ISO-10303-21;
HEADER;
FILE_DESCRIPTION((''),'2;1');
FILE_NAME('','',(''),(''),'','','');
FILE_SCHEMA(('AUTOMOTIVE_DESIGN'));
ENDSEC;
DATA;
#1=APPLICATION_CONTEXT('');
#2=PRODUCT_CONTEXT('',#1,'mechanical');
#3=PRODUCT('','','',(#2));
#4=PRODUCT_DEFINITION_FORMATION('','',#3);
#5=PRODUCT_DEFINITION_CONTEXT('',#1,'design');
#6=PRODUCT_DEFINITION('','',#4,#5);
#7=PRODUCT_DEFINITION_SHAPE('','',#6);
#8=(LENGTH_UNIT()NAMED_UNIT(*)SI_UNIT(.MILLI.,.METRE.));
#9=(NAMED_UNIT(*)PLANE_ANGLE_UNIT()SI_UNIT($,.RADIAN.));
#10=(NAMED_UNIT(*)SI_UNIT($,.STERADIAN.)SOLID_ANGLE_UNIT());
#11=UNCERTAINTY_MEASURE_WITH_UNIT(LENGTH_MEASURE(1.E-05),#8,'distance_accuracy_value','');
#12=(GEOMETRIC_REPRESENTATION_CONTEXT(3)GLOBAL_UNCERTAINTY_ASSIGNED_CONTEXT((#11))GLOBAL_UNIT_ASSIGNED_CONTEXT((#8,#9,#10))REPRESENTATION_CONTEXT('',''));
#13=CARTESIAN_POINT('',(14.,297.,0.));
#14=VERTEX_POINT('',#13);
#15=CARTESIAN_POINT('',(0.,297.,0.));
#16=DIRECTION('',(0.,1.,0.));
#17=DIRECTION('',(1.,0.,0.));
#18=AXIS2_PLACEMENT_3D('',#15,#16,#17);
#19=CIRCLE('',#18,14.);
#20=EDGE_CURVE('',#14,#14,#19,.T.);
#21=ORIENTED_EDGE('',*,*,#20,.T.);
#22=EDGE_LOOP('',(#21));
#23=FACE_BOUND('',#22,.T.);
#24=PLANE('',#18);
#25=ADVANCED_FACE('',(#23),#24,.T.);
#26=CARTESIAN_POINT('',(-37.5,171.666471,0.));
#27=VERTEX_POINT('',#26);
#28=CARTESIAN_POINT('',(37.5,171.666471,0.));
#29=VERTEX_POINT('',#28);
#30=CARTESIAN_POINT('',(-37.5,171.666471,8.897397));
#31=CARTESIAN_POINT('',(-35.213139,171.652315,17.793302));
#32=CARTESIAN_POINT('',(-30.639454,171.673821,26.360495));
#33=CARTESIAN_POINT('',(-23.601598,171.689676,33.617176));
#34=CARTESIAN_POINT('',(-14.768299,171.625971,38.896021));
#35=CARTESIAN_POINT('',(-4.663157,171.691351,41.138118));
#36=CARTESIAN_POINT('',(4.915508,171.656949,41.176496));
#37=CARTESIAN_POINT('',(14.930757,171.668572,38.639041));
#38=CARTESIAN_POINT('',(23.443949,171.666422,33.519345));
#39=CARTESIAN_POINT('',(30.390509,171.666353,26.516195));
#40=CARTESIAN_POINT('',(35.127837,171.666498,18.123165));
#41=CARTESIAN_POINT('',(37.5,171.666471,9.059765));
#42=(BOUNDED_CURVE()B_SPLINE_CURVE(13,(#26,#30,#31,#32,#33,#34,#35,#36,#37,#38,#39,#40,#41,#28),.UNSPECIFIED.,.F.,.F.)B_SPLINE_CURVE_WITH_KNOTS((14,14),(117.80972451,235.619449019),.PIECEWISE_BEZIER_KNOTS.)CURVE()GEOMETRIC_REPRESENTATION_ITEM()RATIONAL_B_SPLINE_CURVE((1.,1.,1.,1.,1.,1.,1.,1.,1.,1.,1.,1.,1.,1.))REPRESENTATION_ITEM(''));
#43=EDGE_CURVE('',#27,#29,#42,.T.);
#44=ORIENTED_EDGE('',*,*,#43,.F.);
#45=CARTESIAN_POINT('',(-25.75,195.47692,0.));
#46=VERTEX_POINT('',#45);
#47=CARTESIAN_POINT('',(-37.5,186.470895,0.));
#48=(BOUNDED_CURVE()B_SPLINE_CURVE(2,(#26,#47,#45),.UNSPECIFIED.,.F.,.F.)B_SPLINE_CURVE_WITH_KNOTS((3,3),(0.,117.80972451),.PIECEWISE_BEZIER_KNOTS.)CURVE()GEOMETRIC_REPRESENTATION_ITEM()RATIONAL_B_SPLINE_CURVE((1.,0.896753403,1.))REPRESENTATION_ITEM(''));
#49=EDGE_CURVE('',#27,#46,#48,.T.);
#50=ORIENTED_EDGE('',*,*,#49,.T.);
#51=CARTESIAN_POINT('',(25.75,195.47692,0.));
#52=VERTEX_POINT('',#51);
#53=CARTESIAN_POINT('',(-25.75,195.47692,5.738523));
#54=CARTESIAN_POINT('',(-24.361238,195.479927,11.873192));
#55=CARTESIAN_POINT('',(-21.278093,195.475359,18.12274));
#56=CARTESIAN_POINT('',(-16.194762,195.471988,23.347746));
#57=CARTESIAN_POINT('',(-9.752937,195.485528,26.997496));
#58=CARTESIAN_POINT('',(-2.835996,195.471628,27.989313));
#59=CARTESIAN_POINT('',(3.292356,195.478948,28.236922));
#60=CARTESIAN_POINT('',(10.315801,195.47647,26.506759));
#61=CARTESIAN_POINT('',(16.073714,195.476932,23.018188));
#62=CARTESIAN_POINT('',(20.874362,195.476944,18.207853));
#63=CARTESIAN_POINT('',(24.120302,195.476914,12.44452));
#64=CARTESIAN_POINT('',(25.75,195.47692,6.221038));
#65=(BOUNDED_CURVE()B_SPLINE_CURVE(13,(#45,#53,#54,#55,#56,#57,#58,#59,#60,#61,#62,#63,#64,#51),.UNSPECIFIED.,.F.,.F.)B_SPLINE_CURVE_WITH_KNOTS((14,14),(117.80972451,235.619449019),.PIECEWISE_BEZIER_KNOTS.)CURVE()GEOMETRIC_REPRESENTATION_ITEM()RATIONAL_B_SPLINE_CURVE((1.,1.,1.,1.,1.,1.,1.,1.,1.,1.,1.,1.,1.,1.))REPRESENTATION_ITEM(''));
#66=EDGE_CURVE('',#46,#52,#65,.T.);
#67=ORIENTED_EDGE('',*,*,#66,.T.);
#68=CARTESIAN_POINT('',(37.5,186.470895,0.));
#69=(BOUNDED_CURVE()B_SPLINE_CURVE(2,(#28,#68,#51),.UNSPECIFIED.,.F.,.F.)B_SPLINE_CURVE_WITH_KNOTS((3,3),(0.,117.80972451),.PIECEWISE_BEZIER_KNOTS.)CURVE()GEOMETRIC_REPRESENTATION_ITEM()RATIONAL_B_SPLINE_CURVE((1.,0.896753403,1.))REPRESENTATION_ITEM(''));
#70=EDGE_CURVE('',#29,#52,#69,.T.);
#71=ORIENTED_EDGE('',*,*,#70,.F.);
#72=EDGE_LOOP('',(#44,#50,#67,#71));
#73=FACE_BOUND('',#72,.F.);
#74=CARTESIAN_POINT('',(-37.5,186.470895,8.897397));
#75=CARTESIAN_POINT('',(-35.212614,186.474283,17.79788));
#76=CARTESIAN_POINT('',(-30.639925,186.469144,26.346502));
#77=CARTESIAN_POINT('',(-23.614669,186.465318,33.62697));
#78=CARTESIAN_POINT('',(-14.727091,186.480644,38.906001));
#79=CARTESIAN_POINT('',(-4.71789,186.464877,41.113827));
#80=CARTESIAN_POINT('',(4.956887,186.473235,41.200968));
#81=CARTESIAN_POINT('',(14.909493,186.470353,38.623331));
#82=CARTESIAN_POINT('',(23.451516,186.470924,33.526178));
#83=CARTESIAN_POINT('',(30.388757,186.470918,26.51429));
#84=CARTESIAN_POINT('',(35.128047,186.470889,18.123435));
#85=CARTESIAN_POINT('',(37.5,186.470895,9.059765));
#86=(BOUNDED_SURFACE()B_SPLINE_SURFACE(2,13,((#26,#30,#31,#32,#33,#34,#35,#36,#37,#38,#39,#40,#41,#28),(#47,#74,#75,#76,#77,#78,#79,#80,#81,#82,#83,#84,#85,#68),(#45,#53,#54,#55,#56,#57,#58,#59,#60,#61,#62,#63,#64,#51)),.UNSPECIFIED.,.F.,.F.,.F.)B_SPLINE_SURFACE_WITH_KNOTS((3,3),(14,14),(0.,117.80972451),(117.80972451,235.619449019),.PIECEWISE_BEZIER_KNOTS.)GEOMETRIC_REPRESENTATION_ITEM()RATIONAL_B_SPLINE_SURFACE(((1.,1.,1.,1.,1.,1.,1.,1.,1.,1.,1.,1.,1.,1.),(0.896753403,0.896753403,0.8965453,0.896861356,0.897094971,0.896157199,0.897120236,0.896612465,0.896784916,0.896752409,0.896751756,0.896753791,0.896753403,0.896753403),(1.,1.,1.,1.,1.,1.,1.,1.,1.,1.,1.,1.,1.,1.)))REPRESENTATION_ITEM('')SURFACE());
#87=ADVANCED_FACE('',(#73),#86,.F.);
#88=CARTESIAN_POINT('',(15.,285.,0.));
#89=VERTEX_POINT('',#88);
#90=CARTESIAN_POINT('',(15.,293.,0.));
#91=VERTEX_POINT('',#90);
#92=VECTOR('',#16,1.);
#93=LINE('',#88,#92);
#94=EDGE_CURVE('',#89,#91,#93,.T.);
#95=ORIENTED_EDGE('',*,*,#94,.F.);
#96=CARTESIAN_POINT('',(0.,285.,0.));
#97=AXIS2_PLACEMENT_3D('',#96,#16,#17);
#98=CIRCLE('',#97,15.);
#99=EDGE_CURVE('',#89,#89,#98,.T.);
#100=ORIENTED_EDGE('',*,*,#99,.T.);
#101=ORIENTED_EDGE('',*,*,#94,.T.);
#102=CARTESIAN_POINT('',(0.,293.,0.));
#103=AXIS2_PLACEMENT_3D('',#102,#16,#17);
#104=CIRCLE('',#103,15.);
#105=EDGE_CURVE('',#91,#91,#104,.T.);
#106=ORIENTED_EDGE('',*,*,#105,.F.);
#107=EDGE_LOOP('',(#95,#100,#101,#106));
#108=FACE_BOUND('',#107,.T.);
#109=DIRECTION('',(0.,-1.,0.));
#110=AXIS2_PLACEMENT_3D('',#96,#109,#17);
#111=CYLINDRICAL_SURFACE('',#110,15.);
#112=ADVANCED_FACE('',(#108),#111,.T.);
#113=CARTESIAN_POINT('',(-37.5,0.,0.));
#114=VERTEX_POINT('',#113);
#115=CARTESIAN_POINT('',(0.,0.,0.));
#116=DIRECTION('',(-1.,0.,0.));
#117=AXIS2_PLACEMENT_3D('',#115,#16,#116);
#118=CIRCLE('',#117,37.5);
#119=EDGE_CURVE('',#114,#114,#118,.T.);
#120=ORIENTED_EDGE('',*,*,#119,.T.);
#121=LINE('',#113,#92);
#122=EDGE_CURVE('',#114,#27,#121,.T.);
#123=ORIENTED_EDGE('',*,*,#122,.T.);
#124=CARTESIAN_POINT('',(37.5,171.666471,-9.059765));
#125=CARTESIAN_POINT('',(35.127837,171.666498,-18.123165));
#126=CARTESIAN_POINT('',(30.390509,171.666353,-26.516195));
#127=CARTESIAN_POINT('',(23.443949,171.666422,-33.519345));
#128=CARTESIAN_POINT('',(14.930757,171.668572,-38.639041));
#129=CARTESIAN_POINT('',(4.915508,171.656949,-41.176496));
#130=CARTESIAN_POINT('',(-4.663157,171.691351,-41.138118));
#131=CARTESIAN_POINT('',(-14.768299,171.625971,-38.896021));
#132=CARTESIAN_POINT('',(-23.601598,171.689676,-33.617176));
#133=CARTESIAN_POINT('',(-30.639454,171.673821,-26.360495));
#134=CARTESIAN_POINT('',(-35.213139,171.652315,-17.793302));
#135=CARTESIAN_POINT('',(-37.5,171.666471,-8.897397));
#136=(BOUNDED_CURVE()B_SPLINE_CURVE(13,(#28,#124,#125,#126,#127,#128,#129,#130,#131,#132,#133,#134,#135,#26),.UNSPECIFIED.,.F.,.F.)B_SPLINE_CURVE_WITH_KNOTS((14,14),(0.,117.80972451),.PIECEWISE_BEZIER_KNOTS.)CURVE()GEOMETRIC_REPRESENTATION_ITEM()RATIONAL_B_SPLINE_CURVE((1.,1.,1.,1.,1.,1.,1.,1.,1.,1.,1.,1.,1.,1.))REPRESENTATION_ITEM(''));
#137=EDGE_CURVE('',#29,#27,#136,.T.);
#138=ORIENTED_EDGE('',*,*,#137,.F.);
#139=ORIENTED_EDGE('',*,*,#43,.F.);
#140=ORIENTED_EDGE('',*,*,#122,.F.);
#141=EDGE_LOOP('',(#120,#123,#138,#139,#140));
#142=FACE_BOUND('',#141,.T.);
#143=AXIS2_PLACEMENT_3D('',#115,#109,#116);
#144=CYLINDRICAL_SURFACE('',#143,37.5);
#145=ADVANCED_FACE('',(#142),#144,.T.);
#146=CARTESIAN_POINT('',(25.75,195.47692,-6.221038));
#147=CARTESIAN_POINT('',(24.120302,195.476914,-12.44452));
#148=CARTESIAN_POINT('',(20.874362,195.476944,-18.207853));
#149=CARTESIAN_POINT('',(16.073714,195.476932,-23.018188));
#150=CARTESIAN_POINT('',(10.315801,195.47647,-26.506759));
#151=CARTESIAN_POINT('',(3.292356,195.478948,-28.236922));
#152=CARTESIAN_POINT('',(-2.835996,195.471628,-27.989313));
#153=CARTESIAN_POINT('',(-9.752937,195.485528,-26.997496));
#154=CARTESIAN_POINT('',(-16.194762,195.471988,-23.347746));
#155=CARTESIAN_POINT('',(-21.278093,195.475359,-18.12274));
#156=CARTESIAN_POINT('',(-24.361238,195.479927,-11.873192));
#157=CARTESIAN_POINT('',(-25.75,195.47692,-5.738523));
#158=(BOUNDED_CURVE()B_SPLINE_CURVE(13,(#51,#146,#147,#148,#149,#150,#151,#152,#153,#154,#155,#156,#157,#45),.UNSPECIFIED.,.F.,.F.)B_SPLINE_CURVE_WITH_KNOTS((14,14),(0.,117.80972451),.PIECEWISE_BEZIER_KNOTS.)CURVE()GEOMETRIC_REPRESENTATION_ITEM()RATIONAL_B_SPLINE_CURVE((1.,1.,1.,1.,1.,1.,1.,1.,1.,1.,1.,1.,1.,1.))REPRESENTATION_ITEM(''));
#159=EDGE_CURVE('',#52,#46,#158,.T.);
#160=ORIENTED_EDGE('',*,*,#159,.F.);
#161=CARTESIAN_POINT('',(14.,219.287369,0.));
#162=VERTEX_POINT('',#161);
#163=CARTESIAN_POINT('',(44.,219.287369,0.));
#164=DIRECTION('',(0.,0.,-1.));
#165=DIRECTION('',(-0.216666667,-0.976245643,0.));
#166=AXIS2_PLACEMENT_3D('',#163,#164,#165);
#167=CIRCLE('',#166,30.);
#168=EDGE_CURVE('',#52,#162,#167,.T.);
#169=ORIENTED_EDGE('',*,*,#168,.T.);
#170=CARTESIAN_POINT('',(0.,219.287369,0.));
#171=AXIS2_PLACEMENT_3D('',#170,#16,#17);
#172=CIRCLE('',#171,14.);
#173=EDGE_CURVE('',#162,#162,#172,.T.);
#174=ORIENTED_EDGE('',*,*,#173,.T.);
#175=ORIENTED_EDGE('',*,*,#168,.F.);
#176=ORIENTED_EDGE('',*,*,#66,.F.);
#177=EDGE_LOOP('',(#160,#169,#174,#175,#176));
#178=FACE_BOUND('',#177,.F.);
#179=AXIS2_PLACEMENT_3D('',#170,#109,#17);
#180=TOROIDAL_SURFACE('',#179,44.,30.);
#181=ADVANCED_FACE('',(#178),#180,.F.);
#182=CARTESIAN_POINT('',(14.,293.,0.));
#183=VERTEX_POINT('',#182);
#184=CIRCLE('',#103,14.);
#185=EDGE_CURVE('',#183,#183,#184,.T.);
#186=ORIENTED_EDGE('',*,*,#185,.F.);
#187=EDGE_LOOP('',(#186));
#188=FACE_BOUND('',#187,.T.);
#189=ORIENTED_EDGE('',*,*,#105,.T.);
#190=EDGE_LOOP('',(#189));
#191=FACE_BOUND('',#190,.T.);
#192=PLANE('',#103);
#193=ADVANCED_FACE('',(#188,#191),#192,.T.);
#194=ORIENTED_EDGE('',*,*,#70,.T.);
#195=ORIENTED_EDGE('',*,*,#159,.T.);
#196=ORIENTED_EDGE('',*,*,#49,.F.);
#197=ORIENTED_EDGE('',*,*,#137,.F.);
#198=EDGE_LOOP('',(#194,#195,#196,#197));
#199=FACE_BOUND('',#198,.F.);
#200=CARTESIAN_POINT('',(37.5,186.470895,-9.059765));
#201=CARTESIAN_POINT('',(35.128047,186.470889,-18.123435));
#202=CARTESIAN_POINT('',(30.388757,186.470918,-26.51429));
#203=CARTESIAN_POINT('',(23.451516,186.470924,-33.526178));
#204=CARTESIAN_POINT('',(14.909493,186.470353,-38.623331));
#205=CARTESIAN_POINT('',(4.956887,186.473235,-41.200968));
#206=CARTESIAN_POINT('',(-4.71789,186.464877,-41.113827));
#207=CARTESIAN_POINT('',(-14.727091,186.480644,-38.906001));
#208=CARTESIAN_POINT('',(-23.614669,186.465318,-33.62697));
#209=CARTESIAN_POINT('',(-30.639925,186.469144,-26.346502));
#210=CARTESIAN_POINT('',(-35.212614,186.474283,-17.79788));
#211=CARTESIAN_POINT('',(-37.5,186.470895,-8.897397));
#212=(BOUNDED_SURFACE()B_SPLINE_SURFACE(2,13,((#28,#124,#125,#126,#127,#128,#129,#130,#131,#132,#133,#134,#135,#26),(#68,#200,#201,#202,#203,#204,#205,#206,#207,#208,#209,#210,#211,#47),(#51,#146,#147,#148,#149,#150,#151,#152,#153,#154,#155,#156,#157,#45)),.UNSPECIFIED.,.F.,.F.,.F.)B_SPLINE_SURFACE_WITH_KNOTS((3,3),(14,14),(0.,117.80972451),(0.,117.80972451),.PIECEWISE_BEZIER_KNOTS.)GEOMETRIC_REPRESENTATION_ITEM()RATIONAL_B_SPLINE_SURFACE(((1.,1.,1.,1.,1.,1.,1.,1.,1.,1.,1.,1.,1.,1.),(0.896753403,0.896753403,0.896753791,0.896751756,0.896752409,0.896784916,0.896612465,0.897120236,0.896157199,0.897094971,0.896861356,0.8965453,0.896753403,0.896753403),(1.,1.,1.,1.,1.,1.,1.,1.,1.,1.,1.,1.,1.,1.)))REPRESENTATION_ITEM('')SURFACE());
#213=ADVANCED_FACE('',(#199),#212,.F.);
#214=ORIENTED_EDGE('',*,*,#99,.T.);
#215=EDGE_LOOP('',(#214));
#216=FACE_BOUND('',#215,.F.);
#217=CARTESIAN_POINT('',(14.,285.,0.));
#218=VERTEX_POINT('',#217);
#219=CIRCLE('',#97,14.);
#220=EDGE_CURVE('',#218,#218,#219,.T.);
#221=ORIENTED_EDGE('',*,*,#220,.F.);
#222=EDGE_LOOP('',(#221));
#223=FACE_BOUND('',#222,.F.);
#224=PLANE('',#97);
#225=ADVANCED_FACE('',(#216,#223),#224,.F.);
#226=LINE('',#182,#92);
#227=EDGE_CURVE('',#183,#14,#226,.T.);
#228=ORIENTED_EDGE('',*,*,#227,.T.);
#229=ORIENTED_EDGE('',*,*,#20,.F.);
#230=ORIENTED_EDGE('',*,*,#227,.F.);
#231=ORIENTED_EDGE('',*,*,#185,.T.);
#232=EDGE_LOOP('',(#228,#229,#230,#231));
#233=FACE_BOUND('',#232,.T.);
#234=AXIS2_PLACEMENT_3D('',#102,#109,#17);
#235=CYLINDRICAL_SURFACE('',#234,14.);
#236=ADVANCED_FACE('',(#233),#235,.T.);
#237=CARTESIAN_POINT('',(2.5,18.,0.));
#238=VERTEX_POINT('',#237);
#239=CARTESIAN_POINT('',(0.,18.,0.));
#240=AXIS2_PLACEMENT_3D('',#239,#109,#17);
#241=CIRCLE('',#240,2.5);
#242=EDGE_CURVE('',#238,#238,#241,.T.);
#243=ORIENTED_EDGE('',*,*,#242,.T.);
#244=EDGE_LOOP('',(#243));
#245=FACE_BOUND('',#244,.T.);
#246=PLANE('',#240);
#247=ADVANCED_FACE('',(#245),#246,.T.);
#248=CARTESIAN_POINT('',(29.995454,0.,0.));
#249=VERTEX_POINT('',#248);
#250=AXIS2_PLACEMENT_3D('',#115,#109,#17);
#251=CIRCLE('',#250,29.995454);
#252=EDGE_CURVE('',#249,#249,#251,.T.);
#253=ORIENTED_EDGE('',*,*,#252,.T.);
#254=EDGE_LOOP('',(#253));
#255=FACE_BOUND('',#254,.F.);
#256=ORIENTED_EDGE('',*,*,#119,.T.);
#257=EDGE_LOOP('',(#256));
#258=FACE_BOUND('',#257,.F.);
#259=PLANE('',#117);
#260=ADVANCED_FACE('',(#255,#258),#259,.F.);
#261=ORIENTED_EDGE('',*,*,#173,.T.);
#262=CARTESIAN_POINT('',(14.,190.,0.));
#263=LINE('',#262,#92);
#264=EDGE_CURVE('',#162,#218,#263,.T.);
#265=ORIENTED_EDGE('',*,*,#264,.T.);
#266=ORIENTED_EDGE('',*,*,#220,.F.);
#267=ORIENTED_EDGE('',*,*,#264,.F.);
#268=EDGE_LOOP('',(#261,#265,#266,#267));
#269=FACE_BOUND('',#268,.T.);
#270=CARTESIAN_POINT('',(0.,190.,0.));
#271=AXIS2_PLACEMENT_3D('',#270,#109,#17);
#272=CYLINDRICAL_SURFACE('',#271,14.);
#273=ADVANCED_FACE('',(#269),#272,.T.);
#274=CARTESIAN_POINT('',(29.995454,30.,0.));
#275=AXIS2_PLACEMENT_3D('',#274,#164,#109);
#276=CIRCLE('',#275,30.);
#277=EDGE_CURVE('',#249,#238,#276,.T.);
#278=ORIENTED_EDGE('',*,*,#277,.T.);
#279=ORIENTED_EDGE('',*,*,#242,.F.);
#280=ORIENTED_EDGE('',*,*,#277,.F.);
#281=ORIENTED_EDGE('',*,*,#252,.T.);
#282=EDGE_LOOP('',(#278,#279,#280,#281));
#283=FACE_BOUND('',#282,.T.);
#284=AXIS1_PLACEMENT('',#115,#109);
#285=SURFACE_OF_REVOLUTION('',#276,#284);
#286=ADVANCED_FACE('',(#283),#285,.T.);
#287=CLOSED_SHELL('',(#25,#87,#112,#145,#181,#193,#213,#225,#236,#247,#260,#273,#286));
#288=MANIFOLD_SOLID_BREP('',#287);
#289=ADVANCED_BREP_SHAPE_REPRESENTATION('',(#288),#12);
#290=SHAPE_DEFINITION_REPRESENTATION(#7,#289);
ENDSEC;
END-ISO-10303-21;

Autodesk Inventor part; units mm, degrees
ref_plane "YZ Plane" through (0, 0, 0) normal (1, 0, 0) x (0, 1, 0)
ref_plane "XZ Plane" through (0, 0, 0) normal (0, 1, 0) x (-1, 0, 0)
ref_plane "XY Plane" through (0, 0, 0) normal (0, 0, 1) x (1, 0, 0)
sketch "Boceto1" plane through (0, 0, 0) normal (0, 0, 1) x (1, 0, 0)
  point P0 (0, 0)
sketch "Boceto2" plane through (0, 0, 0) normal (0, 1, 0) x (-1, 0, 0)
  point P0 (0, 0)
sketch "Boceto3" plane through (0, 0, 0) normal (0, 1, 0) x (-1, 0, 0)
  circle A0 centre (0, 0) radius 37.5
  dimension "d0" = 75
extrude "Extrusión1" add sketch "Boceto3" along normal blind 190
sketch "Boceto4" plane through (0, 190, 0) normal (0, 1, 0) x (1, 0, 0)
  circle A0 centre (0, 0) radius 14
  dimension "d3" = 28
extrude "Extrusión2" add sketch "Boceto4" along normal blind 95
fillet "Empalme1" radius 30 1 edges at (-14, 190, 0)
fillet "Empalme2" radius 30 2 edges at (0, 190, -37.5) (0, 190, 37.5)
sketch "Boceto5" plane through (0, 285, 0) normal (0, 1, 0) x (1, 0, 0)
  circle A0 centre (0, 0) radius 15
  dimension "d8" = 30
extrude "Extrusión3" add sketch "Boceto5" along normal blind 8
sketch "Boceto6" plane through (0, 293, 0) normal (0, 1, 0) x (1, 0, 0)
  circle A0 centre (0, 0) radius 14
extrude "Extrusión4" add sketch "Boceto6" along normal blind 4
sketch "Boceto7" plane through (0, 0, 0) normal (0, -1, 0) x (1, 0, 0)
  circle A0 centre (0, 0) radius 2.5
  dimension "d13" = 5
extrude "Extrusión5" cut sketch "Boceto7" against normal blind 18
fillet "Empalme3" radius 30 1 edges at (-2.5, 0, 0)
properties part number "Botella_Vino"
